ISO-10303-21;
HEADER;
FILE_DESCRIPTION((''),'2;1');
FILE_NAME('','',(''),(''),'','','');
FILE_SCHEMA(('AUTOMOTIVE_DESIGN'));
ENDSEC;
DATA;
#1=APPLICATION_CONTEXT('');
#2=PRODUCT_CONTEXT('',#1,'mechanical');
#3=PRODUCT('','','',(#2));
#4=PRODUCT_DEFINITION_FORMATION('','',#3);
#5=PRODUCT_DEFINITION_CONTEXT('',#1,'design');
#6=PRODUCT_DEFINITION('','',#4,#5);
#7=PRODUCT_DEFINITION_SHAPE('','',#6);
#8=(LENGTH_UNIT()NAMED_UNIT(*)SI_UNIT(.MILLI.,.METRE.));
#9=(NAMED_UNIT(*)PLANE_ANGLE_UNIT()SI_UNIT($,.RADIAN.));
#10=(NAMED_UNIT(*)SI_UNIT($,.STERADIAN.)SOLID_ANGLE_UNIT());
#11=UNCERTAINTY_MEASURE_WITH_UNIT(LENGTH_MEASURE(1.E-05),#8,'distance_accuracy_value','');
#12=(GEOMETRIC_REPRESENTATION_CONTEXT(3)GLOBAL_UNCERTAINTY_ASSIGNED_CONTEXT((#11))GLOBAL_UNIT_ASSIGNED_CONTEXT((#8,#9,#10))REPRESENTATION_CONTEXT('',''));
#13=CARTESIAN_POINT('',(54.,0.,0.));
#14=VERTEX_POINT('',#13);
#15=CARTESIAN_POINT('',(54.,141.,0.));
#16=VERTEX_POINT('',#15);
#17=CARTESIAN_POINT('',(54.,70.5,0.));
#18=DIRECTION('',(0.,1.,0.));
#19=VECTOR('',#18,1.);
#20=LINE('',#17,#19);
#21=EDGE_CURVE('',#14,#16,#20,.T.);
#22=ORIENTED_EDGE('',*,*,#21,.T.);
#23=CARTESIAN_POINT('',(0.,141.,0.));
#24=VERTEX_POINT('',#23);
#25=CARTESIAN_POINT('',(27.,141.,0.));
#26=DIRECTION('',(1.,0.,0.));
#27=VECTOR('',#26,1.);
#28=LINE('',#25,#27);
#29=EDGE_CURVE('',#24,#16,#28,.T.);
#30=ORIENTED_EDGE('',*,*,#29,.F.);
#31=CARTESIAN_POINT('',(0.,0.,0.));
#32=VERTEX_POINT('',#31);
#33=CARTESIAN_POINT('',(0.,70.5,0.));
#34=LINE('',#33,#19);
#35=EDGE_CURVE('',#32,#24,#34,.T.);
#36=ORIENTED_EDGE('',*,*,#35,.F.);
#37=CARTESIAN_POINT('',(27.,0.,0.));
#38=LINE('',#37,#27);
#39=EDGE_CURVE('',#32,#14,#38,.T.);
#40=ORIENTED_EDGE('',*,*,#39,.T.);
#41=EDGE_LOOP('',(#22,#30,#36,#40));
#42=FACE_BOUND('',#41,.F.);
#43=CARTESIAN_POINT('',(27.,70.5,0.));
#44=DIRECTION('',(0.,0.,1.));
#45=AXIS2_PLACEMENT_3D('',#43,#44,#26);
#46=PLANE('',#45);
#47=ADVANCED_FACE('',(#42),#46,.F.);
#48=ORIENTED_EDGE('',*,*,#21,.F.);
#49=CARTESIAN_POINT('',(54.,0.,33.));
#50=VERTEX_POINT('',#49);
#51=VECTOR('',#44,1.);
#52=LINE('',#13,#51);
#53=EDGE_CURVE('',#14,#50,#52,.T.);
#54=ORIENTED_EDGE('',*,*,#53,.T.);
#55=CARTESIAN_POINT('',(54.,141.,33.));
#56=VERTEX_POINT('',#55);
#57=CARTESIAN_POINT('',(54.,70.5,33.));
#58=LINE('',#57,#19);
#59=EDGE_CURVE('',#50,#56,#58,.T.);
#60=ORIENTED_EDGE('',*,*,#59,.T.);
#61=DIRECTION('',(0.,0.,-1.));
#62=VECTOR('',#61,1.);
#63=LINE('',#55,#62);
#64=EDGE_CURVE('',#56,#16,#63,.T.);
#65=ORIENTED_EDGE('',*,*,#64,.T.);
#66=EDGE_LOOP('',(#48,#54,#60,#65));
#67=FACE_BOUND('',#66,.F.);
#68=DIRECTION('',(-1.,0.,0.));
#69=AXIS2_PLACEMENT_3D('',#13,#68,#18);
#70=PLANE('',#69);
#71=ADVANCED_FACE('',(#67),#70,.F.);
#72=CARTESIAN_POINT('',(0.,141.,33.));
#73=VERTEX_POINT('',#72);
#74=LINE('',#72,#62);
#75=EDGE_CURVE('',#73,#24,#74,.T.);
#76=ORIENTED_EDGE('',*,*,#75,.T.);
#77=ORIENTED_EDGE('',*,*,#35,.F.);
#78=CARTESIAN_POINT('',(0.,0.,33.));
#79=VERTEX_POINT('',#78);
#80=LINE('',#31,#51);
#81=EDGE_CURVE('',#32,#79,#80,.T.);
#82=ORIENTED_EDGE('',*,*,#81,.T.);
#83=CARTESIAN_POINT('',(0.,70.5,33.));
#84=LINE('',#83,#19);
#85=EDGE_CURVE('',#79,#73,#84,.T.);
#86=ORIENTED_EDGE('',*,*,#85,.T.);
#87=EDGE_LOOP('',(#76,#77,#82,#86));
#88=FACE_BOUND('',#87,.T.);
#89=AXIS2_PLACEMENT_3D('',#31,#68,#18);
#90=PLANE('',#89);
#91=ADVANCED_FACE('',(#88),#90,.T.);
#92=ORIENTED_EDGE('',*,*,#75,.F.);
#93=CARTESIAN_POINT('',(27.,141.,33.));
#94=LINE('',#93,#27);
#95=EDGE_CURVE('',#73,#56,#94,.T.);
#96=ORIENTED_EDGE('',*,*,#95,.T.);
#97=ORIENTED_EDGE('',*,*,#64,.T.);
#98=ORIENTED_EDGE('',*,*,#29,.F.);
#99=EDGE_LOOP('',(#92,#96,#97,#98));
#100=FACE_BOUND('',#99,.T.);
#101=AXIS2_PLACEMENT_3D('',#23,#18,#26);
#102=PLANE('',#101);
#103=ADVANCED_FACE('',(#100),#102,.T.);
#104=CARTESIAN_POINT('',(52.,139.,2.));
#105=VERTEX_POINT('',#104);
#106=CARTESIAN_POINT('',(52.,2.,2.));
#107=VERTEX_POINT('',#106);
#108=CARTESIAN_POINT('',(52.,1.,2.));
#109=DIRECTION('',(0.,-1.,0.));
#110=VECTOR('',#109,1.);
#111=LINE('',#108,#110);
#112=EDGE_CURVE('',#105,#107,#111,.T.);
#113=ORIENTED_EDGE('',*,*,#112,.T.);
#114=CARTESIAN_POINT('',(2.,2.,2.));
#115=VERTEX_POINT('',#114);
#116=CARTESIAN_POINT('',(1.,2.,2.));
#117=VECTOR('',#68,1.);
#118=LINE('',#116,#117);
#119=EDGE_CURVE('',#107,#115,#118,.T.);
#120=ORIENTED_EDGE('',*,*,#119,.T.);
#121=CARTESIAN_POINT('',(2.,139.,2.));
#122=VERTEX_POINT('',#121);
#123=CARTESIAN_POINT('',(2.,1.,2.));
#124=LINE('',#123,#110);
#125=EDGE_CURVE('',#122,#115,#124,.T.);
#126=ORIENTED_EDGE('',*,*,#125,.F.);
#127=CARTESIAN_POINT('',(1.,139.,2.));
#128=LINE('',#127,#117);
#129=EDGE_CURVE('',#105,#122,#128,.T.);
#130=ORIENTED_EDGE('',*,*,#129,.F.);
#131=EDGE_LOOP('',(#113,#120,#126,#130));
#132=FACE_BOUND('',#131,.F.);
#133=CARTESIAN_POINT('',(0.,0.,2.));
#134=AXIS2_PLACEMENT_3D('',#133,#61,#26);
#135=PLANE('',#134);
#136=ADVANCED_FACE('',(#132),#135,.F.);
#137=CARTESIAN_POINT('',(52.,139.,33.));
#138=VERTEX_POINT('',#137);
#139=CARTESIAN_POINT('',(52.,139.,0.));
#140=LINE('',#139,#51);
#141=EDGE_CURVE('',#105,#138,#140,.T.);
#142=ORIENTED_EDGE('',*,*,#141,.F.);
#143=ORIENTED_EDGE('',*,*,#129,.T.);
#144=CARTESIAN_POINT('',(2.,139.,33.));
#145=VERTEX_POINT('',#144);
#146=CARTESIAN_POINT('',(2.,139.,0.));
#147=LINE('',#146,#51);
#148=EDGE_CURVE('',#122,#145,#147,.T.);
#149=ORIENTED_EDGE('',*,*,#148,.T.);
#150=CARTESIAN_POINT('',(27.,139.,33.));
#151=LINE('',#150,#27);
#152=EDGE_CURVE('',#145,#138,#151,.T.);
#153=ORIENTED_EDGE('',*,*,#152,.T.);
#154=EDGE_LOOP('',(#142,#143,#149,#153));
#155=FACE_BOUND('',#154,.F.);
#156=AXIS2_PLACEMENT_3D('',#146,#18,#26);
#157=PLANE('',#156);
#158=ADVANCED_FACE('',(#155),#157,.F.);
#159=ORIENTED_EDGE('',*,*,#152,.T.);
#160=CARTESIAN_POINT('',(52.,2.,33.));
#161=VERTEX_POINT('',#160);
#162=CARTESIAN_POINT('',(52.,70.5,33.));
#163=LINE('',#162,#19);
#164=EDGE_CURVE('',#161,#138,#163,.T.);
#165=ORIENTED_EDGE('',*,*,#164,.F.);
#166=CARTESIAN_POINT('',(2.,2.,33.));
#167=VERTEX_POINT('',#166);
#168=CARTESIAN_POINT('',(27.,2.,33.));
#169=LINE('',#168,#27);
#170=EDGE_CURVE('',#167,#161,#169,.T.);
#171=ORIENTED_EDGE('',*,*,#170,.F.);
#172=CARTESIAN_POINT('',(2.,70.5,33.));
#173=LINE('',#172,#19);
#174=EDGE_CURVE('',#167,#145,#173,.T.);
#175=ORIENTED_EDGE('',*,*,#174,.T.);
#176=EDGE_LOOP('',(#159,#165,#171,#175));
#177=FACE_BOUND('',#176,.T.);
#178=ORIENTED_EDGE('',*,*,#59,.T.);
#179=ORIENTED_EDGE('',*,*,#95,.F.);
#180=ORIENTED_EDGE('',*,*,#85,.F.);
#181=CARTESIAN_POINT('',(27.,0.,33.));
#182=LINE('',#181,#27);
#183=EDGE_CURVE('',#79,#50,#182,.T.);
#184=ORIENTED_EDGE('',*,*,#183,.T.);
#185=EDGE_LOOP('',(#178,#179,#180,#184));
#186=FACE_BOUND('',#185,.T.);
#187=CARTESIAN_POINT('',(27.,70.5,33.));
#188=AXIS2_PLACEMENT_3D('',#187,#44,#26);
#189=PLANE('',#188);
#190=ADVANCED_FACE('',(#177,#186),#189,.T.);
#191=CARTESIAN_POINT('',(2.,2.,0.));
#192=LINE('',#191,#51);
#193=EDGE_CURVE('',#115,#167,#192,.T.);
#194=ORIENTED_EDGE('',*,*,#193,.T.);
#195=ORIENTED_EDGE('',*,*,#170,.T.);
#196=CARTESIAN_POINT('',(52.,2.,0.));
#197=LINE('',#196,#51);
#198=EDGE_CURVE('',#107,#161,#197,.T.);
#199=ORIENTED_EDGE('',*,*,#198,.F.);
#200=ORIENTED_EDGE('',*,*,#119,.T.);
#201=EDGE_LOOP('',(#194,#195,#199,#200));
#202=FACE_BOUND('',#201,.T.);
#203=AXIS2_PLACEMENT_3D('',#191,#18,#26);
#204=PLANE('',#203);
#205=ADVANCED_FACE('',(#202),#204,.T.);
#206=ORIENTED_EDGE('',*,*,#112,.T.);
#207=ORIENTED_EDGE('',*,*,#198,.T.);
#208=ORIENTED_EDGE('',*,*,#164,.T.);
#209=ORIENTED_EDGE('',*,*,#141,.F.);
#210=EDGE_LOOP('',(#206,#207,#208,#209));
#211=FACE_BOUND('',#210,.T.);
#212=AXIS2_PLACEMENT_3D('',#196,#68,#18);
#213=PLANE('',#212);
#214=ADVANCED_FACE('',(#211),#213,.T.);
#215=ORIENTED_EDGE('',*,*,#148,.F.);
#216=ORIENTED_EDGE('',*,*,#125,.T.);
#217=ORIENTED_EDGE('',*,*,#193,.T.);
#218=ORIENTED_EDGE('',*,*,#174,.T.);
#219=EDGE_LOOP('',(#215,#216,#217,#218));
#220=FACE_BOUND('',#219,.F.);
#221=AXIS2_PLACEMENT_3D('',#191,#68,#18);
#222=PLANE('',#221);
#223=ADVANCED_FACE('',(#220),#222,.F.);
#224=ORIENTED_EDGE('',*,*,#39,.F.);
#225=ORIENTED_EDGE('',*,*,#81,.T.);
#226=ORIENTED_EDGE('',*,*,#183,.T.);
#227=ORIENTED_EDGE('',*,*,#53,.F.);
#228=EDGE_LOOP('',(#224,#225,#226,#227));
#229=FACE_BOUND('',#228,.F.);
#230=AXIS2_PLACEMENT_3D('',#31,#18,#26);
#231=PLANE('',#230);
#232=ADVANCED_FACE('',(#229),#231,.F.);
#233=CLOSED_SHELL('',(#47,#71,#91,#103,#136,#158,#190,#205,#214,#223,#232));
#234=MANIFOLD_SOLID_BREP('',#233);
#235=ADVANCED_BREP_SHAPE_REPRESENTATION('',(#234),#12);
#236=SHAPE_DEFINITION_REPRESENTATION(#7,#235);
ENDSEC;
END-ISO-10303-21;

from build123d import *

# Parameters (mm, degrees)
F0_W     = 54
F0_H     = 141
F0_W_2   = 50
F0_H_2   = 137
F1_DEPTH = 33
F2_W     = 54
F2_H     = 2
F3_DEPTH = 141


# Not quite as in the source:
# - the program builds the solid bodies; features that only make, move or delete a surface that nothing else refers to are left out


with BuildPart() as f1:
    # F0 (on Top) → F1 (new body)
    with BuildSketch(Plane.XY):
        with Locations((27, 70.5)):
            Rectangle(F0_W, F0_H)
        with Locations((27, 70.5)):
            Rectangle(F0_W_2, F0_H_2, mode=Mode.SUBTRACT)
    extrude(amount=F1_DEPTH)

    # F2 (on face) → F3 (join)
    with BuildSketch(Plane.XZ):
        with Locations((27, 1)):
            Rectangle(F2_W, F2_H)
    extrude(amount=-F3_DEPTH)


solid = f1.part
